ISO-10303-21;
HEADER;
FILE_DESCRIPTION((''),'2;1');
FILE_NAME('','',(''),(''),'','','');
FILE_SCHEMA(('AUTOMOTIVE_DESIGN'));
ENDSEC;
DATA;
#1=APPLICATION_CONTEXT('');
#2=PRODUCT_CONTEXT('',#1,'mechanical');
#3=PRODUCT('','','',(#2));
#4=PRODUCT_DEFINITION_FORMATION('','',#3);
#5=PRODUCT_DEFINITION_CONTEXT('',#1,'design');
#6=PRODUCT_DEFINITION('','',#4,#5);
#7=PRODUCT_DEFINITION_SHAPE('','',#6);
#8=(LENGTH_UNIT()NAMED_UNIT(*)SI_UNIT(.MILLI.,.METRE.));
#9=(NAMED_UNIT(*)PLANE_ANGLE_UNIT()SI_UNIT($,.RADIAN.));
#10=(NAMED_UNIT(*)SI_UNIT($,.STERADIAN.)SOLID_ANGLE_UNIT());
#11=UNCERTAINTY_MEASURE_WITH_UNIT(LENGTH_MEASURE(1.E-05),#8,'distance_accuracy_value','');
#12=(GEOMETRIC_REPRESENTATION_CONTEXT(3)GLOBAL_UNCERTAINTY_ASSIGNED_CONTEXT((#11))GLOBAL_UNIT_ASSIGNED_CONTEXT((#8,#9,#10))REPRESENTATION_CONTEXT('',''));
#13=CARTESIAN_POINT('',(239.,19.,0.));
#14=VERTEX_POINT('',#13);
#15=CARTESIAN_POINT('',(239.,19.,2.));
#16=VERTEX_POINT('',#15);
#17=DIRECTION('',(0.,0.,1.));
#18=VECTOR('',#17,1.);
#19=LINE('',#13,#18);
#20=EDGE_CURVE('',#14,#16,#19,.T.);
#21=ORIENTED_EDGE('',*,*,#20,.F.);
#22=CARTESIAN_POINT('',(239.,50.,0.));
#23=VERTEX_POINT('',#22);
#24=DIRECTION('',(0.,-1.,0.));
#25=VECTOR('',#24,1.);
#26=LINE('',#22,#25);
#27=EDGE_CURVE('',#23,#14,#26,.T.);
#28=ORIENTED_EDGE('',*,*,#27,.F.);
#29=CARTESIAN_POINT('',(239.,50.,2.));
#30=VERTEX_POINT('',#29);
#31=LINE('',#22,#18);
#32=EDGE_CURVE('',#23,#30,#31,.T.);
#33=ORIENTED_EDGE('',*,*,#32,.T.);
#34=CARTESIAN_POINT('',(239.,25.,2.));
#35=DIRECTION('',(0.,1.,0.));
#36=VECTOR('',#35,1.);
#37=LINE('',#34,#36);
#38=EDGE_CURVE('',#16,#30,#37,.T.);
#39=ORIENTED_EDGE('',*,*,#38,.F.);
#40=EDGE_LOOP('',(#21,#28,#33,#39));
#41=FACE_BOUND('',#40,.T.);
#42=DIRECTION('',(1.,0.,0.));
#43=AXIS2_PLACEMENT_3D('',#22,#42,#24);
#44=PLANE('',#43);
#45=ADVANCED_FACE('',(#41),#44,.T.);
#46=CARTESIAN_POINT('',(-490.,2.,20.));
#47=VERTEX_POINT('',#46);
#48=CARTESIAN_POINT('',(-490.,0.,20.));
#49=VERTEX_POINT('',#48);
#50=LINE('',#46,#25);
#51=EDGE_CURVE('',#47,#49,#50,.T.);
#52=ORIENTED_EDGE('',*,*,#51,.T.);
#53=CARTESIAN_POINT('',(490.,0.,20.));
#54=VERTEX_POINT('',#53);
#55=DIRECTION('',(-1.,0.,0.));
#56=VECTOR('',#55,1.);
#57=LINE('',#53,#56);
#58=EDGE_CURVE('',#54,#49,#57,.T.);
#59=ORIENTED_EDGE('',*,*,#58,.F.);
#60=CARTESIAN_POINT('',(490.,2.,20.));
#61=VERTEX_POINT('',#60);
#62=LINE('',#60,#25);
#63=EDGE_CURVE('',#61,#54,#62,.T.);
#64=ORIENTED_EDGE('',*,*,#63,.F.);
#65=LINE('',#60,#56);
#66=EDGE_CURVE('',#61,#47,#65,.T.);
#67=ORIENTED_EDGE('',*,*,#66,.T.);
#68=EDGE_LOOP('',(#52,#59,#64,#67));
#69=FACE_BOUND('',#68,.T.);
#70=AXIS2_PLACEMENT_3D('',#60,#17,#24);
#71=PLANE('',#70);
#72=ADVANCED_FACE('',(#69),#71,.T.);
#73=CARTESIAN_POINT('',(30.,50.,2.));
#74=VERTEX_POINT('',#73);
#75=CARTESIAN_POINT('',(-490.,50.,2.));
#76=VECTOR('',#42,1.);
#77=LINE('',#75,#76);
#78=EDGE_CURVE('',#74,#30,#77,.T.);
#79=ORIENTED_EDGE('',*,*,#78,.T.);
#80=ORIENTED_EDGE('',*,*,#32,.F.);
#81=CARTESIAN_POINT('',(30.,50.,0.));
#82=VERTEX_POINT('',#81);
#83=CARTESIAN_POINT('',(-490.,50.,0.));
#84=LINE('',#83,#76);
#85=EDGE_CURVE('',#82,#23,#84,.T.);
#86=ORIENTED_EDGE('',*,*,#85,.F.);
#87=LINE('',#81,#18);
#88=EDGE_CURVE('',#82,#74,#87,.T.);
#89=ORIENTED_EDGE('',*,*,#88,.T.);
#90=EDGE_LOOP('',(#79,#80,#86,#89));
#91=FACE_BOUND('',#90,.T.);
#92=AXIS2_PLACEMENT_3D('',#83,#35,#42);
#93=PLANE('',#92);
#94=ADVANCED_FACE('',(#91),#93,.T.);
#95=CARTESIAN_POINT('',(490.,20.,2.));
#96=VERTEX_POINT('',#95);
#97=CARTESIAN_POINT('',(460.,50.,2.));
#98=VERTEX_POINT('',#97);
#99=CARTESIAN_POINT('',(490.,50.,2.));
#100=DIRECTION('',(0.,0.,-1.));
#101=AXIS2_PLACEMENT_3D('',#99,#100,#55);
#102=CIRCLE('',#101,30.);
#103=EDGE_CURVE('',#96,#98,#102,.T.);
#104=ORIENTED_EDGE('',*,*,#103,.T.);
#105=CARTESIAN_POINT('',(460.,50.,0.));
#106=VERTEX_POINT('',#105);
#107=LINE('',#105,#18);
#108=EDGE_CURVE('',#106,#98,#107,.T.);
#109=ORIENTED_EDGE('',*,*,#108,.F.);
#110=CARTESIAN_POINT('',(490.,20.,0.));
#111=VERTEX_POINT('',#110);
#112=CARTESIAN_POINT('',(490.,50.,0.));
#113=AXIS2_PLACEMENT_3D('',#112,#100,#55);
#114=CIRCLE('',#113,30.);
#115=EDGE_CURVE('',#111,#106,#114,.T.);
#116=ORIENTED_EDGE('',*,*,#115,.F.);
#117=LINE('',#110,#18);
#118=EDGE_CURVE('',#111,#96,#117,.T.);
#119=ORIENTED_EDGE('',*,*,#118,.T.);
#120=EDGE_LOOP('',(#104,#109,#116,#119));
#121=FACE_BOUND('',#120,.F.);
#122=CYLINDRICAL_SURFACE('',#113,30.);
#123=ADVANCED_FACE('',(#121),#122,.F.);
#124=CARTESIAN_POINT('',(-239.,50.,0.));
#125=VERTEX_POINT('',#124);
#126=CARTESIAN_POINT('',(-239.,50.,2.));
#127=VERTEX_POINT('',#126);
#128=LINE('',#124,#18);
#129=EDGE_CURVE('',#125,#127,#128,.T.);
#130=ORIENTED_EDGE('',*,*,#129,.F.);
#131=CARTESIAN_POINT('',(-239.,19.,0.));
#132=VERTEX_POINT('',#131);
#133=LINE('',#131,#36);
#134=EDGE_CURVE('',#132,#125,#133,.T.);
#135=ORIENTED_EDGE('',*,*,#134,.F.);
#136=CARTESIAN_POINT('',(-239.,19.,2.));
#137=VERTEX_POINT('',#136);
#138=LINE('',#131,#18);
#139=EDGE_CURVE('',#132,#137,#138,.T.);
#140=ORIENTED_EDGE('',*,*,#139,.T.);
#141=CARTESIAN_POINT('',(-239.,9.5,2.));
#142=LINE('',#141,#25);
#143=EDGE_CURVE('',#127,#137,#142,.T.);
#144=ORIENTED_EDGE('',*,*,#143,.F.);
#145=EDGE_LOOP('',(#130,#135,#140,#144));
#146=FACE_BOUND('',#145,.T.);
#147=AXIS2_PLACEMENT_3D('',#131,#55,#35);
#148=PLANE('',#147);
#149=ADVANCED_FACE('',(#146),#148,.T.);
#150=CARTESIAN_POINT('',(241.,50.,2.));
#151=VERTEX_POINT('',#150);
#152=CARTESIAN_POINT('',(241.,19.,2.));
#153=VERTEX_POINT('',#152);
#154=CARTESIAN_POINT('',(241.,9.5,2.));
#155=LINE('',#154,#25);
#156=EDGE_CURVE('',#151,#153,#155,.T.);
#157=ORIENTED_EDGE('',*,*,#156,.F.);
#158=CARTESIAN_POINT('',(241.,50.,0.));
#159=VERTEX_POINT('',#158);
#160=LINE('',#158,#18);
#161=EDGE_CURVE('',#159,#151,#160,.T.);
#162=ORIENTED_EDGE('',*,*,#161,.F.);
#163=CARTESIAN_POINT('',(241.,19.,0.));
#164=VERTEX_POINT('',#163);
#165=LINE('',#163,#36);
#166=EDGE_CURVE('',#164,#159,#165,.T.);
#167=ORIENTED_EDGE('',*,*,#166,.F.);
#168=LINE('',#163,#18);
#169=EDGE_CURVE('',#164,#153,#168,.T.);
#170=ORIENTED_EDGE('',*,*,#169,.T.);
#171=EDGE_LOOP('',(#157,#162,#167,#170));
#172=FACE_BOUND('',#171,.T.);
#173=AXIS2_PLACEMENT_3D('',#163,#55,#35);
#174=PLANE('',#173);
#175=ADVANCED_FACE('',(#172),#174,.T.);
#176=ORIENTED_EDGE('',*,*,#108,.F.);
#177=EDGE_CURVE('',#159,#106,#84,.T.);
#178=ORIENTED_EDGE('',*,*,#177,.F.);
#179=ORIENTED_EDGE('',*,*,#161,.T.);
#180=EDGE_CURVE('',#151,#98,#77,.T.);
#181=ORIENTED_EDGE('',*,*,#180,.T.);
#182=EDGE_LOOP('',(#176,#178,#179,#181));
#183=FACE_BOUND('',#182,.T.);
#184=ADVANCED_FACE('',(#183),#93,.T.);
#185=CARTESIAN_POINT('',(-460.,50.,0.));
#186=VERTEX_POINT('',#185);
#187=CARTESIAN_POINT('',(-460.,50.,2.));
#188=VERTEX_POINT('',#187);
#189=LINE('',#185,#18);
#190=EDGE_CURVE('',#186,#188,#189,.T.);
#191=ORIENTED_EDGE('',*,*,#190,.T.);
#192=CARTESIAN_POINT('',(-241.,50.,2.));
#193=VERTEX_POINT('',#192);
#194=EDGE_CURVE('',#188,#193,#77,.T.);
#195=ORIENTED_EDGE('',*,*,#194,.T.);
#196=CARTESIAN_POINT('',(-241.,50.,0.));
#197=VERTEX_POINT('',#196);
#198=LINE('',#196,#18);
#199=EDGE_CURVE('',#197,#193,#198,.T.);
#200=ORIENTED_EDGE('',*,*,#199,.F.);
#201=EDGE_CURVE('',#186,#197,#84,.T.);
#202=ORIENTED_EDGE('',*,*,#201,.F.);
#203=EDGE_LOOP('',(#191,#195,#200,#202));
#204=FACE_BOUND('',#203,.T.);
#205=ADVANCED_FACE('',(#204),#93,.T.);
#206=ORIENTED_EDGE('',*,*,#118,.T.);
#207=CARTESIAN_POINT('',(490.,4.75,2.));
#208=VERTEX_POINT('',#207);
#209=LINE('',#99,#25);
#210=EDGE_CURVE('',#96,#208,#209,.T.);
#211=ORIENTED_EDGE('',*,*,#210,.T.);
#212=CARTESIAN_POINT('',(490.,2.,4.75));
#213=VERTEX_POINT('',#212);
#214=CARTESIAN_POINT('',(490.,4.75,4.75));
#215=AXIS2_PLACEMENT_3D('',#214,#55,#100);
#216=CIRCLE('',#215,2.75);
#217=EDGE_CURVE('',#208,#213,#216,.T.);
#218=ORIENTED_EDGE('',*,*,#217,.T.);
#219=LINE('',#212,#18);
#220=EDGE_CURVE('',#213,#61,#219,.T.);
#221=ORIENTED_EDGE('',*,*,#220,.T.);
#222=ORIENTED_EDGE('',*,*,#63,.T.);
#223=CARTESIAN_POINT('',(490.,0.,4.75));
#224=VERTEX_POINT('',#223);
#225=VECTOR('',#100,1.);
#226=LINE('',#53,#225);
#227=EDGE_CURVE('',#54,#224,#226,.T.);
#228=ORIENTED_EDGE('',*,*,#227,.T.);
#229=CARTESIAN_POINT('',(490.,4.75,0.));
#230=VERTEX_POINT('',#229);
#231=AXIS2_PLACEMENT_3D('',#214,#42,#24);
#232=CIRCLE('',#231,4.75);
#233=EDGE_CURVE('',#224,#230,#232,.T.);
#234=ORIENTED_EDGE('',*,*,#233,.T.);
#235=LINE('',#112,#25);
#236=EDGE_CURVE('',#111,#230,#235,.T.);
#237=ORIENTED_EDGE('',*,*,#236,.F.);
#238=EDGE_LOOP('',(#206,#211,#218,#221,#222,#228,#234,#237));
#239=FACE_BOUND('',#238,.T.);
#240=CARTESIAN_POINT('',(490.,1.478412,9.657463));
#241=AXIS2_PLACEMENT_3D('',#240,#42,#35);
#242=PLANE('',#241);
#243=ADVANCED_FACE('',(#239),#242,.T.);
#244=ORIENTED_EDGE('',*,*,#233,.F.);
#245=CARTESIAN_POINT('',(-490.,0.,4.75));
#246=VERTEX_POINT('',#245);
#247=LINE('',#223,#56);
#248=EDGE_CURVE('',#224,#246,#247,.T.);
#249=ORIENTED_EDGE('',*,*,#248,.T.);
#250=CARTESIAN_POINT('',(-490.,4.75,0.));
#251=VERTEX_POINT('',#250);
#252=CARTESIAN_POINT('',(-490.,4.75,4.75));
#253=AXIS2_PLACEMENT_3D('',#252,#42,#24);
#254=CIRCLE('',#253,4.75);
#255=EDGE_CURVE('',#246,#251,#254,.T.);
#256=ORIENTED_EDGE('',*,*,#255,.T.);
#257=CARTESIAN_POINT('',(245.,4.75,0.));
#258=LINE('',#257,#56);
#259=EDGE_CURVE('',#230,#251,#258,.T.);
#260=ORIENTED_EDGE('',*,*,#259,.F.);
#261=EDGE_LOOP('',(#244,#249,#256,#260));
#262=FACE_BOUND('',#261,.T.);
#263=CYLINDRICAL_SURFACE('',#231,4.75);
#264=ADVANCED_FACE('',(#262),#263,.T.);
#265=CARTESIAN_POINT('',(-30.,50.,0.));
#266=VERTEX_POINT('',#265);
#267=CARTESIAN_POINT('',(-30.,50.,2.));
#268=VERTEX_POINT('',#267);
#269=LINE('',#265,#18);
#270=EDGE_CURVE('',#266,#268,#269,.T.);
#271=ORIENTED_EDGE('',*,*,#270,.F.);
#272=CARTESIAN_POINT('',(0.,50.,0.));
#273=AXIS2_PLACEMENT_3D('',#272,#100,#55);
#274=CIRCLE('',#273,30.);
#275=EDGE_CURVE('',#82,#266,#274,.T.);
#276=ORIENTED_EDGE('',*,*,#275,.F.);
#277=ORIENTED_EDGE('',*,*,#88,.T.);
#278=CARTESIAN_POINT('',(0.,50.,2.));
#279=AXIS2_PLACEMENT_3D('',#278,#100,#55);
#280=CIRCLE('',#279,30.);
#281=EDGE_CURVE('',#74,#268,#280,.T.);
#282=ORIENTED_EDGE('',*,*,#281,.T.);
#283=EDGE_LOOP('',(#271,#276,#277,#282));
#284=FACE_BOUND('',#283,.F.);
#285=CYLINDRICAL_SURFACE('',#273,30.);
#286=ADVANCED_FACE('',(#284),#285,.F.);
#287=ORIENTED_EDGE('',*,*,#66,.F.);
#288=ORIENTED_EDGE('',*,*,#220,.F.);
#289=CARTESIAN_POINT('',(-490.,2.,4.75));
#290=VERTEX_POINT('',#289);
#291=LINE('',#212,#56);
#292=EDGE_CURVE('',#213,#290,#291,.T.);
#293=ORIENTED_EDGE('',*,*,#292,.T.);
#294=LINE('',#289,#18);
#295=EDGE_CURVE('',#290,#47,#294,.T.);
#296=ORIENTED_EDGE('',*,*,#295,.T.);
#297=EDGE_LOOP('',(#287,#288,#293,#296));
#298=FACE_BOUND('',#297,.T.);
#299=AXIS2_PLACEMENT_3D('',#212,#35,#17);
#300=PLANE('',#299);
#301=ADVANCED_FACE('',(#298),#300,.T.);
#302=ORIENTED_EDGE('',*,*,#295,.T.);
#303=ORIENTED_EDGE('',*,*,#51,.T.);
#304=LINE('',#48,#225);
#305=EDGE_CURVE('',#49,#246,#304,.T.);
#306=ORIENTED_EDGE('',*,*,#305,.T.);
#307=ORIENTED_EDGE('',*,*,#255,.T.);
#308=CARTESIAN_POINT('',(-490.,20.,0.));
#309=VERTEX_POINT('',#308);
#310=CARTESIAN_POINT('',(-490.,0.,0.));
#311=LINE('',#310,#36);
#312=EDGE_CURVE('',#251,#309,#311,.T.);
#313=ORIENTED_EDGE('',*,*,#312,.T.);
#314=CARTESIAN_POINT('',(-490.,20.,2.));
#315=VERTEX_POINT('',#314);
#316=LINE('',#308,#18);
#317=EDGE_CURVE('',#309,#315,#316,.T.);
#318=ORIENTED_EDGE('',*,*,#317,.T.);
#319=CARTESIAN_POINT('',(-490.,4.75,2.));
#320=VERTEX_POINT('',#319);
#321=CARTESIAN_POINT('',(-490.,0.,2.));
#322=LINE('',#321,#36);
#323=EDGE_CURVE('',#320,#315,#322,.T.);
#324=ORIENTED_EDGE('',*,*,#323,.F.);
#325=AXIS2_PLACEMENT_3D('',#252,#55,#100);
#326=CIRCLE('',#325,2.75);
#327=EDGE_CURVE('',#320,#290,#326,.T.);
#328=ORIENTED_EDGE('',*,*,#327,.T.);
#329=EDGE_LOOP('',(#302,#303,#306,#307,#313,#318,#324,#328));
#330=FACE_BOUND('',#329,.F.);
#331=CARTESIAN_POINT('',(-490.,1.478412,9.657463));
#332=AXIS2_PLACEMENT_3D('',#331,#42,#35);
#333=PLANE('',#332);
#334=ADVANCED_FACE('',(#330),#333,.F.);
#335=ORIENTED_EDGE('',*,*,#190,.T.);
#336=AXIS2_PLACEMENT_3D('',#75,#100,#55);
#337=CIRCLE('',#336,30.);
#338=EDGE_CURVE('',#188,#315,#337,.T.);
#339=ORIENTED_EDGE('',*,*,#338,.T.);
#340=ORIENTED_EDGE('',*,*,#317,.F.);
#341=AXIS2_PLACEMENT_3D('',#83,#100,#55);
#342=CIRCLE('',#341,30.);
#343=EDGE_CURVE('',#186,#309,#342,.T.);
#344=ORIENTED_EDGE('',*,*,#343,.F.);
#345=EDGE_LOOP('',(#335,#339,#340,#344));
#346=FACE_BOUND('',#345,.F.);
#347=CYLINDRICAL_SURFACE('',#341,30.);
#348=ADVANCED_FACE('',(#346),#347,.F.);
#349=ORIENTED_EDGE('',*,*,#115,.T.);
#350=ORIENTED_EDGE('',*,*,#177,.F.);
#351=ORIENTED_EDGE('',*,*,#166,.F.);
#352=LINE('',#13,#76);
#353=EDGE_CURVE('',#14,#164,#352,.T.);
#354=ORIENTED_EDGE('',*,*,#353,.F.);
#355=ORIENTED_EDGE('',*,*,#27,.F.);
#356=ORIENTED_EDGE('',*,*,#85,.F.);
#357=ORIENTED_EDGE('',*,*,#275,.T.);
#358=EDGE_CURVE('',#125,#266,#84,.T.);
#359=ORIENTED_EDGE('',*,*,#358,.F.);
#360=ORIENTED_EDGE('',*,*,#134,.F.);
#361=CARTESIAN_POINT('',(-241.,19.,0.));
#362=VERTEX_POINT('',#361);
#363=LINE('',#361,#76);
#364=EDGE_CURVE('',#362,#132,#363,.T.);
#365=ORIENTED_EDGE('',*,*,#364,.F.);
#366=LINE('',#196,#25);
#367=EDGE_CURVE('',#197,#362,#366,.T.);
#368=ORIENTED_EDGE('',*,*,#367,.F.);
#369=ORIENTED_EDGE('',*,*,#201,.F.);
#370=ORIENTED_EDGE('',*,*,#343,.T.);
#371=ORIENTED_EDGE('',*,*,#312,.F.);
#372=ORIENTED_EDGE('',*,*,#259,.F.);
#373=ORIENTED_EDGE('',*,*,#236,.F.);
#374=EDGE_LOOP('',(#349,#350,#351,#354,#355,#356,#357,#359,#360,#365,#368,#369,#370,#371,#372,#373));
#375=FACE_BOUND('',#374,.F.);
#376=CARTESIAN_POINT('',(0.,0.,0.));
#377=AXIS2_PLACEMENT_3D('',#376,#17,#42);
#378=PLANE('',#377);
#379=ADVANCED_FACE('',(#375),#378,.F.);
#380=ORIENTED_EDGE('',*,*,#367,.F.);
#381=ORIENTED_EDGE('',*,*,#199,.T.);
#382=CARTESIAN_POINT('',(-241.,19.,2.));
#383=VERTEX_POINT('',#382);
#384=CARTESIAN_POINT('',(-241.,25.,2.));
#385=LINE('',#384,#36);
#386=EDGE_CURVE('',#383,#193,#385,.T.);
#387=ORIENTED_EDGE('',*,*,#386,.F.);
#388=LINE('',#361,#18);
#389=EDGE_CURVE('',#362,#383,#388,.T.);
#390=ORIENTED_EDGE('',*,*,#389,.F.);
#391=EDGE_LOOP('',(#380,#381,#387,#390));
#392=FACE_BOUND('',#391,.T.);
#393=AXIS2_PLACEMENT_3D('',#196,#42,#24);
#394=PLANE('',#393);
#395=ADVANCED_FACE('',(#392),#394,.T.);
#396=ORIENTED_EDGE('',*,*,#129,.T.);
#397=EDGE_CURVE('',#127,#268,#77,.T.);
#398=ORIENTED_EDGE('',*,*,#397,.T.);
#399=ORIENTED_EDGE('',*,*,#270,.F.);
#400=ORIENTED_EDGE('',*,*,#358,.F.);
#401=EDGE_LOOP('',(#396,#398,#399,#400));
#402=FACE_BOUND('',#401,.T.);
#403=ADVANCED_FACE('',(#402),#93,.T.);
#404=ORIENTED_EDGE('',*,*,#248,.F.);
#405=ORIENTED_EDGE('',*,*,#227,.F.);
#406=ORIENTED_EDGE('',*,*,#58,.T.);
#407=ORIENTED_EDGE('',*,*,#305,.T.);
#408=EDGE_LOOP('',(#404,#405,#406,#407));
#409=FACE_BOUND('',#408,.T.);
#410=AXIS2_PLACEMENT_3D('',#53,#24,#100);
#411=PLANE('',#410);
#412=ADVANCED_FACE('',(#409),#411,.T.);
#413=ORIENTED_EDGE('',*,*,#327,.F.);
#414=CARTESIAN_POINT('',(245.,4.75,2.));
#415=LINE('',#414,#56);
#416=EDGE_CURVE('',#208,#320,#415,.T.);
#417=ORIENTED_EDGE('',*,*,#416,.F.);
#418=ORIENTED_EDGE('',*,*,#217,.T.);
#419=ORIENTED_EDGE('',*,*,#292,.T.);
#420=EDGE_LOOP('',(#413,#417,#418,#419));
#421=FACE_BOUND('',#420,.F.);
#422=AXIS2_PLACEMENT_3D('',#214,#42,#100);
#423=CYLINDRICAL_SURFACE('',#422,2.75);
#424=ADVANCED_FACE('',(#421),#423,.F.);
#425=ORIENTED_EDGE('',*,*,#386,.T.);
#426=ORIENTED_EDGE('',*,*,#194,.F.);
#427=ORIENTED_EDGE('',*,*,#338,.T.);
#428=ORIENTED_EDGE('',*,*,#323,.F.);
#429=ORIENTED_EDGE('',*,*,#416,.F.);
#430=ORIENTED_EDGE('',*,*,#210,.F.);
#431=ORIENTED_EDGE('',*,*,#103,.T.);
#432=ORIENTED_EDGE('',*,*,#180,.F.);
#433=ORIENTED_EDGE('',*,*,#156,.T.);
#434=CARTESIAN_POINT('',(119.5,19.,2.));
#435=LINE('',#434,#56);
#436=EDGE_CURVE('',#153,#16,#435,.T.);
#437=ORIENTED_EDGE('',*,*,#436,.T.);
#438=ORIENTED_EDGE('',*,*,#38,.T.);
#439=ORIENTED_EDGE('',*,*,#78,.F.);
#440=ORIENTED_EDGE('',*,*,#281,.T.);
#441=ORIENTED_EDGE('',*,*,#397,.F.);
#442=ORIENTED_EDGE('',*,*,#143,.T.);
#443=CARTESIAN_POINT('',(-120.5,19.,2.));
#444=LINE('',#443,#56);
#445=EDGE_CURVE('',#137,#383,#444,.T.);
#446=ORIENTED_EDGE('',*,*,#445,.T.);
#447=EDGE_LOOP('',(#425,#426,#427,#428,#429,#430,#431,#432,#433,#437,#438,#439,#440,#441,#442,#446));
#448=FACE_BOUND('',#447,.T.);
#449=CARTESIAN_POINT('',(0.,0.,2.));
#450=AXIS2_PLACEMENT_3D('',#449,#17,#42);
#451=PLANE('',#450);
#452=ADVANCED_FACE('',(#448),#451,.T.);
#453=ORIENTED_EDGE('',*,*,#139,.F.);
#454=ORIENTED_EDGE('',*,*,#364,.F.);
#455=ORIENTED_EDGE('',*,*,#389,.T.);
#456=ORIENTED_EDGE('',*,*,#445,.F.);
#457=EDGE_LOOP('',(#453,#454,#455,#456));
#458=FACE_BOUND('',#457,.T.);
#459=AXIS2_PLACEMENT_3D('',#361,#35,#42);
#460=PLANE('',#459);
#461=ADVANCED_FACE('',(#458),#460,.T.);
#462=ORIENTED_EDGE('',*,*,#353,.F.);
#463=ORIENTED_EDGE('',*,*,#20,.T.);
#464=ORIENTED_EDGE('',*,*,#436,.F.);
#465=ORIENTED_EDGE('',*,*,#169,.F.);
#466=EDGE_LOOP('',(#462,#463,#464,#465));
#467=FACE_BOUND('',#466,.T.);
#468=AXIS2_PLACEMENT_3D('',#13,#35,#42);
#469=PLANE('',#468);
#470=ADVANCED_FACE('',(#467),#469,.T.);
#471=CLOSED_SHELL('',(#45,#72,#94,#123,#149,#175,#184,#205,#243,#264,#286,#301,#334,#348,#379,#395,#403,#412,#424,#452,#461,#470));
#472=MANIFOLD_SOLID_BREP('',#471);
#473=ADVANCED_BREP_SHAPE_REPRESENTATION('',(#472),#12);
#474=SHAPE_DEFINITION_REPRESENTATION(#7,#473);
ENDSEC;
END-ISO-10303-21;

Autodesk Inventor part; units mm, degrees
ref_plane "YZ Plane" through (0, 0, 0) normal (1, 0, 0) x (0, 1, 0)
ref_plane "XZ Plane" through (0, 0, 0) normal (0, 1, 0) x (-1, 0, 0)
ref_plane "XY Plane" through (0, 0, 0) normal (0, 0, 1) x (1, 0, 0)
sketch "Sketch1" plane through (0, 0, 0) normal (0, 0, 1) x (1, 0, 0)
  line L0 (-490, 50) -> (490, 50)
  line L1 (490, 50) -> (490, 0)
  line L2 (490, 0) -> (-490, 0)
  line L3 (-490, 0) -> (-490, 50)
  point P0 (0, 0)
  point P1 (0, 0)
  dimension "d0" = 980
  dimension "d1" = 50
extrude "Plate1" add sketch "Sketch1" along normal blind 2
sketch "Sketch2" plane through (490, 2, 0) normal (0, -1, 0) x (1, 0, 0)
  line L0 (-980, 0) -> (0, 0)
  line L1 (0, 0) -> (0, 20)
  line L2 (0, 20) -> (-980, 20)
  line L3 (-980, 20) -> (-980, 0)
edge flange "Flange1" height 20 angle 90 thickness 2 bend radius 2.75 thickness toward (0, -1, 0) relief tear relief width 2 relief depth 1 edges at (0, 0, 2) wall of the first edge with corners at (-490, 2, 0) (490, 2, 0) (490, 2, 20) (-490, 2, 20)
bend "Bend1"
corner "Corner1"
sketch "Sketch5" plane through (0, 0, 0) normal (0, 0, -1) x (-1, 0, 0)
  line L0 (490, 50) -> (-490, 50) projected
  line L1 (490, 0) -> (-490, 0) projected
  circle A0 centre (0, 50) radius 30
  line L2 (-490, 0) -> (-490, 50)
  line L3 (490, 0) -> (490, 50)
  circle A1 centre (-490, 50) radius 30
  circle A2 centre (490, 50) radius 30
  line L4 (-241, 50) -> (-239, 50)
  line L5 (-239, 50) -> (-239, 19)
  line L6 (-239, 19) -> (-241, 19)
  line L7 (-241, 19) -> (-241, 50)
  line L8 (239, 50) -> (241, 50)
  line L9 (241, 50) -> (241, 19)
  line L10 (241, 19) -> (239, 19)
  line L11 (239, 19) -> (239, 50)
  line L12 (0, 50) -> (0, 0) construction
  point P0 (240, 19)
  point P1 (-240, 19)
  point P2 (-490, 20)
  point P3 (-460, 50)
  point P4 (-30, 50)
  point P5 (30, 50)
  point P6 (460, 50)
  point P7 (490, 20)
  dimension "d33" = 60
  dimension "d34" = 2
  dimension "d35" = 31
  dimension "d36" = 480
extrude "Extrusion1" cut sketch "Sketch5" against normal through all contours L9 L10 L11 L0 | L0 L3 A2 | A0 L0 | L5 L6 L7 L0 | L2 L0 A1 picked at (470.2507, 47.7748) picked at (6.5355, 34.7298) picked at (-470.2507, 47.7748)
sketch "Sketch7" plane through (0, 0, 2) normal (0, 0, 1) x (1, 0, 0)
  line L0 (468.7934, 20.88) -> (468.7934, 8.88) construction
  line L1 (468.7934, 8.88) -> (280.354, 8.88) construction
  line L2 (280.354, 8.88) -> (280.354, 20.88) construction
  line L3 (280.354, 20.88) -> (468.7934, 20.88) construction
  line L4 (-239, 50) -> (-30, 50) projected
  point P0 (0, 0)
  point P1 (-1, 50)
  point P2 (1, 50)
  dimension "d30" = 12
mark "Mark1"
equation "\"d1\" = Стрингер_7"
equation "\"d2\" = Thickness"
equation "\"d3\" = BendReliefWidth"
equation "\"d4\" = BendReliefDepth"
equation "\"d5\" = MinimumRemnant"
equation "\"d6\" = TransitionRadius"
equation "\"d9\" = BendRadius"
equation "\"d10\" = CornerReliefSize"
equation "\"d11\" = GapSize"
equation "\"d12\" = JacobiRadiusSize"
equation "\"BendReliefWidth\" = Thickness"
equation "\"BendReliefDepth\" = 0.5 * Thickness"
equation "\"CornerReliefSize\" = 4 * Thickness"
equation "\"MinimumRemnant\" = 2 * Thickness"
equation "\"TransitionRadius\" = BendRadius"
equation "\"JacobiRadiusSize\" = BendRadius"
equation "\"GapSize\" = Thickness"
equation "\"Стрингер_7\" = 50"
equation "\"Thickness\" = 2"
equation "\"BendRadius\" = 2.75"
properties part number "MSC 504 stringer board belly" material "Stainless Steel"
